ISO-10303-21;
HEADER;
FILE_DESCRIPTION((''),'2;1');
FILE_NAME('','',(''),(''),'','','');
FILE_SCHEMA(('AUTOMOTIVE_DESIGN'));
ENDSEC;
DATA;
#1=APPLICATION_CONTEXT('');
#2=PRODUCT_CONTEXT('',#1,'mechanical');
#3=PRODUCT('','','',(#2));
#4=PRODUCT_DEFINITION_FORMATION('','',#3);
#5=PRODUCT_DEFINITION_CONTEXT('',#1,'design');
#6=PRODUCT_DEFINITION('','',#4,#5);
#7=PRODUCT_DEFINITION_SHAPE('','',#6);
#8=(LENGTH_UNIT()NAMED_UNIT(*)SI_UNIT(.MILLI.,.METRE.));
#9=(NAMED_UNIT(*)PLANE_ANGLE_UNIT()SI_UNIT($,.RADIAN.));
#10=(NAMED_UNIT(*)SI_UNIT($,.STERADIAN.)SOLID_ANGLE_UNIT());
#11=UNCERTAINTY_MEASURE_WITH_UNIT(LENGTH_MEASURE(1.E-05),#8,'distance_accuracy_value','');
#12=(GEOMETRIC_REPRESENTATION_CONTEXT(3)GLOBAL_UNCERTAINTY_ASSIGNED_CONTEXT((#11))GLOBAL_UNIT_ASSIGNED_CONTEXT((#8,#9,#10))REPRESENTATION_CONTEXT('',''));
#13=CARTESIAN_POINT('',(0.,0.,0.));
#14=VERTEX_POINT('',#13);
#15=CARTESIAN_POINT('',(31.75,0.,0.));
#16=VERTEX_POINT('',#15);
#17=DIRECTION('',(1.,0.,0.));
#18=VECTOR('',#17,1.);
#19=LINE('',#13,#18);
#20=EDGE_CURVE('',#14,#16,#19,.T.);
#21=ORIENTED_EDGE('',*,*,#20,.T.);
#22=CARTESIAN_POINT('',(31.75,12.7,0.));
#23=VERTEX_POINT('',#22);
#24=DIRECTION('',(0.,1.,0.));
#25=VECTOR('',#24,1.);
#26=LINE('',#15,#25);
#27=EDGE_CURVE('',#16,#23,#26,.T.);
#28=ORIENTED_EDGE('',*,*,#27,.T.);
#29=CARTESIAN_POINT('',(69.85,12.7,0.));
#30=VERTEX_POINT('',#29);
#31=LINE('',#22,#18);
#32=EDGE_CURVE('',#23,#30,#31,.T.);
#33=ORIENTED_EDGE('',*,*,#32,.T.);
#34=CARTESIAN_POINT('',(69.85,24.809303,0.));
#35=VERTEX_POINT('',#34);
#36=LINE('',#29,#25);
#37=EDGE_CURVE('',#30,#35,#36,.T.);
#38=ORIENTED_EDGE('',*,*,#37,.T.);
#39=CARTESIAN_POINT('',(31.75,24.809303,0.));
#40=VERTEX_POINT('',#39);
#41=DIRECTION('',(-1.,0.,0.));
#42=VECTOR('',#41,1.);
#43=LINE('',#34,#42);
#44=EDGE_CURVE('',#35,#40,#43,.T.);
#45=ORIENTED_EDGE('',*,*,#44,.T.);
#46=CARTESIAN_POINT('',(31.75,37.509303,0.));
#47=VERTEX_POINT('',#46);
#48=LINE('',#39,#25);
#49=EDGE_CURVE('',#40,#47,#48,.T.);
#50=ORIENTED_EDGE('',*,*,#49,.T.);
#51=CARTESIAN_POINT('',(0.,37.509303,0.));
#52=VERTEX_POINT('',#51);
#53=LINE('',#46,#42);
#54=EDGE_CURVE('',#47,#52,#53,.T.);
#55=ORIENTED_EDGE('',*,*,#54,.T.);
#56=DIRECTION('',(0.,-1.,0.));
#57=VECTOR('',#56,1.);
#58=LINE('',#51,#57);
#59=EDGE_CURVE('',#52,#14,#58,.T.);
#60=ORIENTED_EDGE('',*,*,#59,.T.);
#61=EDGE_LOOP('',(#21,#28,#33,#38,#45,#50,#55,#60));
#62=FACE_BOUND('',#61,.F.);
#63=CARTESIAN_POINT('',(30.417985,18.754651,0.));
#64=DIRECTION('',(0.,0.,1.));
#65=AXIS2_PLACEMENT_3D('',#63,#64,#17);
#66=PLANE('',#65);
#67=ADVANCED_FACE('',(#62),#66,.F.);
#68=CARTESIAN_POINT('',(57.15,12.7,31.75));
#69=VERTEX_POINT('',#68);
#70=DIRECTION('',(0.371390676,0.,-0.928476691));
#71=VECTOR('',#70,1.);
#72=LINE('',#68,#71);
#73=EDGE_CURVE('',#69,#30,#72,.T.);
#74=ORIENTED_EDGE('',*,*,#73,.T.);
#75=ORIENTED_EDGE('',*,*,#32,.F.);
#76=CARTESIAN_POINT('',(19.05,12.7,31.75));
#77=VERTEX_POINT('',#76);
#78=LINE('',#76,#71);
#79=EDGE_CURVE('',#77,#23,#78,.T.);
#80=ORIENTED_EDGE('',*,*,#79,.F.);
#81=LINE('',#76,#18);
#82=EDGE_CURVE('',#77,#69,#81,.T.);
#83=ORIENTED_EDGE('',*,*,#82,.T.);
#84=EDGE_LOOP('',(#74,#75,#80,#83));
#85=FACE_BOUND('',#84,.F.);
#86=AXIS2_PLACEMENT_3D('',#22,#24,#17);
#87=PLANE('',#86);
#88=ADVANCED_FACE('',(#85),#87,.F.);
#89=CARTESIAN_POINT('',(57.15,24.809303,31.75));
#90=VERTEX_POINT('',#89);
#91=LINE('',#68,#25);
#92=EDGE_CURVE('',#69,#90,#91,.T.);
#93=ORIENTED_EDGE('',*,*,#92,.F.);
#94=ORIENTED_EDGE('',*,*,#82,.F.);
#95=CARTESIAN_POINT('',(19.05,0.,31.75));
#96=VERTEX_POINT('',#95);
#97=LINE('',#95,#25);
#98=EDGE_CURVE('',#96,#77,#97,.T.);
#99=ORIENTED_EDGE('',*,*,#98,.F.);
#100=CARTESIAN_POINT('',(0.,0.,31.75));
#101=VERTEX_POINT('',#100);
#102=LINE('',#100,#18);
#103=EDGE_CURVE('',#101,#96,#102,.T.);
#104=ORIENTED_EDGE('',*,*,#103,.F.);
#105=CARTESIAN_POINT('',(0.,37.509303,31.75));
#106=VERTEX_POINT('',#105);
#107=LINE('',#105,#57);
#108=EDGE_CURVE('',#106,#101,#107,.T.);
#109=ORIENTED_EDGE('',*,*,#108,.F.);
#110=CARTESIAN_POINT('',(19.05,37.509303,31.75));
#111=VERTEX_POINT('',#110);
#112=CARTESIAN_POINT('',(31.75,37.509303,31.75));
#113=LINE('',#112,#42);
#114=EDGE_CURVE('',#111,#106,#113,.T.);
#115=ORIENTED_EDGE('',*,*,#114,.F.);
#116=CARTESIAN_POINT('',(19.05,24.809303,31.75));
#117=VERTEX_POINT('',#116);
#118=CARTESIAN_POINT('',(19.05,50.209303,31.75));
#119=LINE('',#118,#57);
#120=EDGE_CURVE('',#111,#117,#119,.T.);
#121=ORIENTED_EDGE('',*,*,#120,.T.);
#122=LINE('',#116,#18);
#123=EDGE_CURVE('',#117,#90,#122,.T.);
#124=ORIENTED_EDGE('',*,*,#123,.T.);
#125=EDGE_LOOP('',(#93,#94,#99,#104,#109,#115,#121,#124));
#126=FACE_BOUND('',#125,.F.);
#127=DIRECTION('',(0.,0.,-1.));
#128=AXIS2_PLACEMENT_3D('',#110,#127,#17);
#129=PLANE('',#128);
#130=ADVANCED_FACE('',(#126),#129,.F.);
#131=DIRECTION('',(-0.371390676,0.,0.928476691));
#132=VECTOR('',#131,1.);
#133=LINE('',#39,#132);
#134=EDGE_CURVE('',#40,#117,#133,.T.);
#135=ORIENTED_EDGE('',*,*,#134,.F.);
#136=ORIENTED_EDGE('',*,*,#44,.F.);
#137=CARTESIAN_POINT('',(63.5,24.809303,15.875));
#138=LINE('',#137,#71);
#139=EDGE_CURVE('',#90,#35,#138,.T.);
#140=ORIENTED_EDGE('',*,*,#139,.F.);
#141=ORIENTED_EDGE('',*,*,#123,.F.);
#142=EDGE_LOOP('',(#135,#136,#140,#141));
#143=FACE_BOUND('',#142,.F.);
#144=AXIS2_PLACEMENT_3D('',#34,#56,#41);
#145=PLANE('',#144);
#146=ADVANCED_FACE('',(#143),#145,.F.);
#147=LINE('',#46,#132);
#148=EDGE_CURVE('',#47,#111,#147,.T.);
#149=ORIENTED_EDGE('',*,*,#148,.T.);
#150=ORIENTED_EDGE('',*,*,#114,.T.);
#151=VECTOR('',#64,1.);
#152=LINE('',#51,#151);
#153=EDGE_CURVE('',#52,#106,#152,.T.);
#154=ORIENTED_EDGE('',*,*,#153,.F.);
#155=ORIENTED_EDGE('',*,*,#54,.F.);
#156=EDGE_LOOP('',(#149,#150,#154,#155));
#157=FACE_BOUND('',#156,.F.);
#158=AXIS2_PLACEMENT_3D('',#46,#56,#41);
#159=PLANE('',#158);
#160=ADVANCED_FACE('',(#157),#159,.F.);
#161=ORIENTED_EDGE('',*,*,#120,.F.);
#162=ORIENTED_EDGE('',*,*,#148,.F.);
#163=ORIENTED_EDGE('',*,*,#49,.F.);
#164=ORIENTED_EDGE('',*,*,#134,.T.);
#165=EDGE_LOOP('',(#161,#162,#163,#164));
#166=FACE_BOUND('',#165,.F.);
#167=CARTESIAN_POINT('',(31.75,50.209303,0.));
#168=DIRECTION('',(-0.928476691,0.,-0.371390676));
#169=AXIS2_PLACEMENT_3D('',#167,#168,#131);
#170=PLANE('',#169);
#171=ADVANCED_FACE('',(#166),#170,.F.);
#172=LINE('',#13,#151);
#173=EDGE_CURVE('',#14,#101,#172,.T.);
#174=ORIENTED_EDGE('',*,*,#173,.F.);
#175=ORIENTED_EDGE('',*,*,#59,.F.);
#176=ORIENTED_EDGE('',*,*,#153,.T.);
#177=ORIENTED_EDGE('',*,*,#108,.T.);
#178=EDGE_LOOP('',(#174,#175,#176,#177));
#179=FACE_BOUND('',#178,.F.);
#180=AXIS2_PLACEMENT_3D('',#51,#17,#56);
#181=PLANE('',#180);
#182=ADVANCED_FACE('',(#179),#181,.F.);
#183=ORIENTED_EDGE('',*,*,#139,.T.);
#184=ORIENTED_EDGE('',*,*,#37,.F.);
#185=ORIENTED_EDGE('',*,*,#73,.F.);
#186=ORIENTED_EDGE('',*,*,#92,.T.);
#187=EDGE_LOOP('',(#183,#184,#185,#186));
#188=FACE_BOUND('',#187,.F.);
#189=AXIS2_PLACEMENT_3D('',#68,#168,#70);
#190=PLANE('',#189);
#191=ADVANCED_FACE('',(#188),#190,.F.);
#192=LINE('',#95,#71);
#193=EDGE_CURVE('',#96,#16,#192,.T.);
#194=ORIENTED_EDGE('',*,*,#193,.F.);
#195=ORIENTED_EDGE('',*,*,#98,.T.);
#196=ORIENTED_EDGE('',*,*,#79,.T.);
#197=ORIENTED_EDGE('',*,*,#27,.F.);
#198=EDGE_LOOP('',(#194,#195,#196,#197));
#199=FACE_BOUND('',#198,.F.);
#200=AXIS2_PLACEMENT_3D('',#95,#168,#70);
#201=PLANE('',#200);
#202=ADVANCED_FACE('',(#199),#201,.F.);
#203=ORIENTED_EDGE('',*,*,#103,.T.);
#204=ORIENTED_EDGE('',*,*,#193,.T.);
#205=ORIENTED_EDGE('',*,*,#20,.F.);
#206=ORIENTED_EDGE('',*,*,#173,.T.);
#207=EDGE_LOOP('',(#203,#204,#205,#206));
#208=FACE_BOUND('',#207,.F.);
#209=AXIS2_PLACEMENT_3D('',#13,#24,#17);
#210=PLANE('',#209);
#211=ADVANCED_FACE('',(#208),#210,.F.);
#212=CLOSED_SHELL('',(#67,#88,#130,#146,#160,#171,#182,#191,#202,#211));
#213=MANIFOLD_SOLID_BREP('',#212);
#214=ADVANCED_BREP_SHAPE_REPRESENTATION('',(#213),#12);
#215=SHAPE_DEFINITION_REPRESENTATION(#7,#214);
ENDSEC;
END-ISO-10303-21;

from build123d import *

# Parameters (mm, degrees)
F1_DEPTH = 31.75
F3_DEPTH = 25.4
F5_DEPTH = 12.7
F7_DEPTH = 12.7
F8_DEPTH = 25.4


with BuildPart() as f1:
    # F0 (on Top) → F1 (new body)
    with BuildSketch(Plane.XY):
        Polygon((0, 37.5093027622), (0, 0), (31.75, 0), (31.75, 12.7), (69.85, 12.7), (69.85, 24.8093027622), (31.75, 24.8093027622), (31.75, 37.5093027622), align=None)
    extrude(amount=F1_DEPTH)

    # F2 (on face) → F3 (cut)
    with BuildSketch(Plane.XZ.offset(-12.7)):
        Polygon((57.15, 31.75), (69.85, 0), (69.85, 31.75), align=None)
    extrude(amount=-F3_DEPTH, mode=Mode.SUBTRACT)

    # F4 (on face) → F5 (cut)
    with BuildSketch(Plane.XZ):
        Polygon((19.05, 31.75), (31.75, 0), (31.75, 31.75), align=None)
    extrude(amount=-F5_DEPTH, mode=Mode.SUBTRACT)

    # F6 (on face) → F7 (join)
    with BuildSketch(Plane(origin=(0, 37.5093027622, 0), x_dir=(-1, 0, 0), z_dir=(0, 1, 0))):
        Polygon((-31.75, 31.75), (-31.75, 0), (-19.05, 31.75), align=None)
    extrude(amount=F7_DEPTH)

    # F8 (cut): a face of the model
    f8_faces = [f1.faces().sort_by_distance(p)[0] for p in [
        (27.5166666667, 50.2093027622, 21.1666666667),
    ]]
    extrude(f8_faces, amount=-F8_DEPTH, mode=Mode.SUBTRACT)


solid = f1.part
